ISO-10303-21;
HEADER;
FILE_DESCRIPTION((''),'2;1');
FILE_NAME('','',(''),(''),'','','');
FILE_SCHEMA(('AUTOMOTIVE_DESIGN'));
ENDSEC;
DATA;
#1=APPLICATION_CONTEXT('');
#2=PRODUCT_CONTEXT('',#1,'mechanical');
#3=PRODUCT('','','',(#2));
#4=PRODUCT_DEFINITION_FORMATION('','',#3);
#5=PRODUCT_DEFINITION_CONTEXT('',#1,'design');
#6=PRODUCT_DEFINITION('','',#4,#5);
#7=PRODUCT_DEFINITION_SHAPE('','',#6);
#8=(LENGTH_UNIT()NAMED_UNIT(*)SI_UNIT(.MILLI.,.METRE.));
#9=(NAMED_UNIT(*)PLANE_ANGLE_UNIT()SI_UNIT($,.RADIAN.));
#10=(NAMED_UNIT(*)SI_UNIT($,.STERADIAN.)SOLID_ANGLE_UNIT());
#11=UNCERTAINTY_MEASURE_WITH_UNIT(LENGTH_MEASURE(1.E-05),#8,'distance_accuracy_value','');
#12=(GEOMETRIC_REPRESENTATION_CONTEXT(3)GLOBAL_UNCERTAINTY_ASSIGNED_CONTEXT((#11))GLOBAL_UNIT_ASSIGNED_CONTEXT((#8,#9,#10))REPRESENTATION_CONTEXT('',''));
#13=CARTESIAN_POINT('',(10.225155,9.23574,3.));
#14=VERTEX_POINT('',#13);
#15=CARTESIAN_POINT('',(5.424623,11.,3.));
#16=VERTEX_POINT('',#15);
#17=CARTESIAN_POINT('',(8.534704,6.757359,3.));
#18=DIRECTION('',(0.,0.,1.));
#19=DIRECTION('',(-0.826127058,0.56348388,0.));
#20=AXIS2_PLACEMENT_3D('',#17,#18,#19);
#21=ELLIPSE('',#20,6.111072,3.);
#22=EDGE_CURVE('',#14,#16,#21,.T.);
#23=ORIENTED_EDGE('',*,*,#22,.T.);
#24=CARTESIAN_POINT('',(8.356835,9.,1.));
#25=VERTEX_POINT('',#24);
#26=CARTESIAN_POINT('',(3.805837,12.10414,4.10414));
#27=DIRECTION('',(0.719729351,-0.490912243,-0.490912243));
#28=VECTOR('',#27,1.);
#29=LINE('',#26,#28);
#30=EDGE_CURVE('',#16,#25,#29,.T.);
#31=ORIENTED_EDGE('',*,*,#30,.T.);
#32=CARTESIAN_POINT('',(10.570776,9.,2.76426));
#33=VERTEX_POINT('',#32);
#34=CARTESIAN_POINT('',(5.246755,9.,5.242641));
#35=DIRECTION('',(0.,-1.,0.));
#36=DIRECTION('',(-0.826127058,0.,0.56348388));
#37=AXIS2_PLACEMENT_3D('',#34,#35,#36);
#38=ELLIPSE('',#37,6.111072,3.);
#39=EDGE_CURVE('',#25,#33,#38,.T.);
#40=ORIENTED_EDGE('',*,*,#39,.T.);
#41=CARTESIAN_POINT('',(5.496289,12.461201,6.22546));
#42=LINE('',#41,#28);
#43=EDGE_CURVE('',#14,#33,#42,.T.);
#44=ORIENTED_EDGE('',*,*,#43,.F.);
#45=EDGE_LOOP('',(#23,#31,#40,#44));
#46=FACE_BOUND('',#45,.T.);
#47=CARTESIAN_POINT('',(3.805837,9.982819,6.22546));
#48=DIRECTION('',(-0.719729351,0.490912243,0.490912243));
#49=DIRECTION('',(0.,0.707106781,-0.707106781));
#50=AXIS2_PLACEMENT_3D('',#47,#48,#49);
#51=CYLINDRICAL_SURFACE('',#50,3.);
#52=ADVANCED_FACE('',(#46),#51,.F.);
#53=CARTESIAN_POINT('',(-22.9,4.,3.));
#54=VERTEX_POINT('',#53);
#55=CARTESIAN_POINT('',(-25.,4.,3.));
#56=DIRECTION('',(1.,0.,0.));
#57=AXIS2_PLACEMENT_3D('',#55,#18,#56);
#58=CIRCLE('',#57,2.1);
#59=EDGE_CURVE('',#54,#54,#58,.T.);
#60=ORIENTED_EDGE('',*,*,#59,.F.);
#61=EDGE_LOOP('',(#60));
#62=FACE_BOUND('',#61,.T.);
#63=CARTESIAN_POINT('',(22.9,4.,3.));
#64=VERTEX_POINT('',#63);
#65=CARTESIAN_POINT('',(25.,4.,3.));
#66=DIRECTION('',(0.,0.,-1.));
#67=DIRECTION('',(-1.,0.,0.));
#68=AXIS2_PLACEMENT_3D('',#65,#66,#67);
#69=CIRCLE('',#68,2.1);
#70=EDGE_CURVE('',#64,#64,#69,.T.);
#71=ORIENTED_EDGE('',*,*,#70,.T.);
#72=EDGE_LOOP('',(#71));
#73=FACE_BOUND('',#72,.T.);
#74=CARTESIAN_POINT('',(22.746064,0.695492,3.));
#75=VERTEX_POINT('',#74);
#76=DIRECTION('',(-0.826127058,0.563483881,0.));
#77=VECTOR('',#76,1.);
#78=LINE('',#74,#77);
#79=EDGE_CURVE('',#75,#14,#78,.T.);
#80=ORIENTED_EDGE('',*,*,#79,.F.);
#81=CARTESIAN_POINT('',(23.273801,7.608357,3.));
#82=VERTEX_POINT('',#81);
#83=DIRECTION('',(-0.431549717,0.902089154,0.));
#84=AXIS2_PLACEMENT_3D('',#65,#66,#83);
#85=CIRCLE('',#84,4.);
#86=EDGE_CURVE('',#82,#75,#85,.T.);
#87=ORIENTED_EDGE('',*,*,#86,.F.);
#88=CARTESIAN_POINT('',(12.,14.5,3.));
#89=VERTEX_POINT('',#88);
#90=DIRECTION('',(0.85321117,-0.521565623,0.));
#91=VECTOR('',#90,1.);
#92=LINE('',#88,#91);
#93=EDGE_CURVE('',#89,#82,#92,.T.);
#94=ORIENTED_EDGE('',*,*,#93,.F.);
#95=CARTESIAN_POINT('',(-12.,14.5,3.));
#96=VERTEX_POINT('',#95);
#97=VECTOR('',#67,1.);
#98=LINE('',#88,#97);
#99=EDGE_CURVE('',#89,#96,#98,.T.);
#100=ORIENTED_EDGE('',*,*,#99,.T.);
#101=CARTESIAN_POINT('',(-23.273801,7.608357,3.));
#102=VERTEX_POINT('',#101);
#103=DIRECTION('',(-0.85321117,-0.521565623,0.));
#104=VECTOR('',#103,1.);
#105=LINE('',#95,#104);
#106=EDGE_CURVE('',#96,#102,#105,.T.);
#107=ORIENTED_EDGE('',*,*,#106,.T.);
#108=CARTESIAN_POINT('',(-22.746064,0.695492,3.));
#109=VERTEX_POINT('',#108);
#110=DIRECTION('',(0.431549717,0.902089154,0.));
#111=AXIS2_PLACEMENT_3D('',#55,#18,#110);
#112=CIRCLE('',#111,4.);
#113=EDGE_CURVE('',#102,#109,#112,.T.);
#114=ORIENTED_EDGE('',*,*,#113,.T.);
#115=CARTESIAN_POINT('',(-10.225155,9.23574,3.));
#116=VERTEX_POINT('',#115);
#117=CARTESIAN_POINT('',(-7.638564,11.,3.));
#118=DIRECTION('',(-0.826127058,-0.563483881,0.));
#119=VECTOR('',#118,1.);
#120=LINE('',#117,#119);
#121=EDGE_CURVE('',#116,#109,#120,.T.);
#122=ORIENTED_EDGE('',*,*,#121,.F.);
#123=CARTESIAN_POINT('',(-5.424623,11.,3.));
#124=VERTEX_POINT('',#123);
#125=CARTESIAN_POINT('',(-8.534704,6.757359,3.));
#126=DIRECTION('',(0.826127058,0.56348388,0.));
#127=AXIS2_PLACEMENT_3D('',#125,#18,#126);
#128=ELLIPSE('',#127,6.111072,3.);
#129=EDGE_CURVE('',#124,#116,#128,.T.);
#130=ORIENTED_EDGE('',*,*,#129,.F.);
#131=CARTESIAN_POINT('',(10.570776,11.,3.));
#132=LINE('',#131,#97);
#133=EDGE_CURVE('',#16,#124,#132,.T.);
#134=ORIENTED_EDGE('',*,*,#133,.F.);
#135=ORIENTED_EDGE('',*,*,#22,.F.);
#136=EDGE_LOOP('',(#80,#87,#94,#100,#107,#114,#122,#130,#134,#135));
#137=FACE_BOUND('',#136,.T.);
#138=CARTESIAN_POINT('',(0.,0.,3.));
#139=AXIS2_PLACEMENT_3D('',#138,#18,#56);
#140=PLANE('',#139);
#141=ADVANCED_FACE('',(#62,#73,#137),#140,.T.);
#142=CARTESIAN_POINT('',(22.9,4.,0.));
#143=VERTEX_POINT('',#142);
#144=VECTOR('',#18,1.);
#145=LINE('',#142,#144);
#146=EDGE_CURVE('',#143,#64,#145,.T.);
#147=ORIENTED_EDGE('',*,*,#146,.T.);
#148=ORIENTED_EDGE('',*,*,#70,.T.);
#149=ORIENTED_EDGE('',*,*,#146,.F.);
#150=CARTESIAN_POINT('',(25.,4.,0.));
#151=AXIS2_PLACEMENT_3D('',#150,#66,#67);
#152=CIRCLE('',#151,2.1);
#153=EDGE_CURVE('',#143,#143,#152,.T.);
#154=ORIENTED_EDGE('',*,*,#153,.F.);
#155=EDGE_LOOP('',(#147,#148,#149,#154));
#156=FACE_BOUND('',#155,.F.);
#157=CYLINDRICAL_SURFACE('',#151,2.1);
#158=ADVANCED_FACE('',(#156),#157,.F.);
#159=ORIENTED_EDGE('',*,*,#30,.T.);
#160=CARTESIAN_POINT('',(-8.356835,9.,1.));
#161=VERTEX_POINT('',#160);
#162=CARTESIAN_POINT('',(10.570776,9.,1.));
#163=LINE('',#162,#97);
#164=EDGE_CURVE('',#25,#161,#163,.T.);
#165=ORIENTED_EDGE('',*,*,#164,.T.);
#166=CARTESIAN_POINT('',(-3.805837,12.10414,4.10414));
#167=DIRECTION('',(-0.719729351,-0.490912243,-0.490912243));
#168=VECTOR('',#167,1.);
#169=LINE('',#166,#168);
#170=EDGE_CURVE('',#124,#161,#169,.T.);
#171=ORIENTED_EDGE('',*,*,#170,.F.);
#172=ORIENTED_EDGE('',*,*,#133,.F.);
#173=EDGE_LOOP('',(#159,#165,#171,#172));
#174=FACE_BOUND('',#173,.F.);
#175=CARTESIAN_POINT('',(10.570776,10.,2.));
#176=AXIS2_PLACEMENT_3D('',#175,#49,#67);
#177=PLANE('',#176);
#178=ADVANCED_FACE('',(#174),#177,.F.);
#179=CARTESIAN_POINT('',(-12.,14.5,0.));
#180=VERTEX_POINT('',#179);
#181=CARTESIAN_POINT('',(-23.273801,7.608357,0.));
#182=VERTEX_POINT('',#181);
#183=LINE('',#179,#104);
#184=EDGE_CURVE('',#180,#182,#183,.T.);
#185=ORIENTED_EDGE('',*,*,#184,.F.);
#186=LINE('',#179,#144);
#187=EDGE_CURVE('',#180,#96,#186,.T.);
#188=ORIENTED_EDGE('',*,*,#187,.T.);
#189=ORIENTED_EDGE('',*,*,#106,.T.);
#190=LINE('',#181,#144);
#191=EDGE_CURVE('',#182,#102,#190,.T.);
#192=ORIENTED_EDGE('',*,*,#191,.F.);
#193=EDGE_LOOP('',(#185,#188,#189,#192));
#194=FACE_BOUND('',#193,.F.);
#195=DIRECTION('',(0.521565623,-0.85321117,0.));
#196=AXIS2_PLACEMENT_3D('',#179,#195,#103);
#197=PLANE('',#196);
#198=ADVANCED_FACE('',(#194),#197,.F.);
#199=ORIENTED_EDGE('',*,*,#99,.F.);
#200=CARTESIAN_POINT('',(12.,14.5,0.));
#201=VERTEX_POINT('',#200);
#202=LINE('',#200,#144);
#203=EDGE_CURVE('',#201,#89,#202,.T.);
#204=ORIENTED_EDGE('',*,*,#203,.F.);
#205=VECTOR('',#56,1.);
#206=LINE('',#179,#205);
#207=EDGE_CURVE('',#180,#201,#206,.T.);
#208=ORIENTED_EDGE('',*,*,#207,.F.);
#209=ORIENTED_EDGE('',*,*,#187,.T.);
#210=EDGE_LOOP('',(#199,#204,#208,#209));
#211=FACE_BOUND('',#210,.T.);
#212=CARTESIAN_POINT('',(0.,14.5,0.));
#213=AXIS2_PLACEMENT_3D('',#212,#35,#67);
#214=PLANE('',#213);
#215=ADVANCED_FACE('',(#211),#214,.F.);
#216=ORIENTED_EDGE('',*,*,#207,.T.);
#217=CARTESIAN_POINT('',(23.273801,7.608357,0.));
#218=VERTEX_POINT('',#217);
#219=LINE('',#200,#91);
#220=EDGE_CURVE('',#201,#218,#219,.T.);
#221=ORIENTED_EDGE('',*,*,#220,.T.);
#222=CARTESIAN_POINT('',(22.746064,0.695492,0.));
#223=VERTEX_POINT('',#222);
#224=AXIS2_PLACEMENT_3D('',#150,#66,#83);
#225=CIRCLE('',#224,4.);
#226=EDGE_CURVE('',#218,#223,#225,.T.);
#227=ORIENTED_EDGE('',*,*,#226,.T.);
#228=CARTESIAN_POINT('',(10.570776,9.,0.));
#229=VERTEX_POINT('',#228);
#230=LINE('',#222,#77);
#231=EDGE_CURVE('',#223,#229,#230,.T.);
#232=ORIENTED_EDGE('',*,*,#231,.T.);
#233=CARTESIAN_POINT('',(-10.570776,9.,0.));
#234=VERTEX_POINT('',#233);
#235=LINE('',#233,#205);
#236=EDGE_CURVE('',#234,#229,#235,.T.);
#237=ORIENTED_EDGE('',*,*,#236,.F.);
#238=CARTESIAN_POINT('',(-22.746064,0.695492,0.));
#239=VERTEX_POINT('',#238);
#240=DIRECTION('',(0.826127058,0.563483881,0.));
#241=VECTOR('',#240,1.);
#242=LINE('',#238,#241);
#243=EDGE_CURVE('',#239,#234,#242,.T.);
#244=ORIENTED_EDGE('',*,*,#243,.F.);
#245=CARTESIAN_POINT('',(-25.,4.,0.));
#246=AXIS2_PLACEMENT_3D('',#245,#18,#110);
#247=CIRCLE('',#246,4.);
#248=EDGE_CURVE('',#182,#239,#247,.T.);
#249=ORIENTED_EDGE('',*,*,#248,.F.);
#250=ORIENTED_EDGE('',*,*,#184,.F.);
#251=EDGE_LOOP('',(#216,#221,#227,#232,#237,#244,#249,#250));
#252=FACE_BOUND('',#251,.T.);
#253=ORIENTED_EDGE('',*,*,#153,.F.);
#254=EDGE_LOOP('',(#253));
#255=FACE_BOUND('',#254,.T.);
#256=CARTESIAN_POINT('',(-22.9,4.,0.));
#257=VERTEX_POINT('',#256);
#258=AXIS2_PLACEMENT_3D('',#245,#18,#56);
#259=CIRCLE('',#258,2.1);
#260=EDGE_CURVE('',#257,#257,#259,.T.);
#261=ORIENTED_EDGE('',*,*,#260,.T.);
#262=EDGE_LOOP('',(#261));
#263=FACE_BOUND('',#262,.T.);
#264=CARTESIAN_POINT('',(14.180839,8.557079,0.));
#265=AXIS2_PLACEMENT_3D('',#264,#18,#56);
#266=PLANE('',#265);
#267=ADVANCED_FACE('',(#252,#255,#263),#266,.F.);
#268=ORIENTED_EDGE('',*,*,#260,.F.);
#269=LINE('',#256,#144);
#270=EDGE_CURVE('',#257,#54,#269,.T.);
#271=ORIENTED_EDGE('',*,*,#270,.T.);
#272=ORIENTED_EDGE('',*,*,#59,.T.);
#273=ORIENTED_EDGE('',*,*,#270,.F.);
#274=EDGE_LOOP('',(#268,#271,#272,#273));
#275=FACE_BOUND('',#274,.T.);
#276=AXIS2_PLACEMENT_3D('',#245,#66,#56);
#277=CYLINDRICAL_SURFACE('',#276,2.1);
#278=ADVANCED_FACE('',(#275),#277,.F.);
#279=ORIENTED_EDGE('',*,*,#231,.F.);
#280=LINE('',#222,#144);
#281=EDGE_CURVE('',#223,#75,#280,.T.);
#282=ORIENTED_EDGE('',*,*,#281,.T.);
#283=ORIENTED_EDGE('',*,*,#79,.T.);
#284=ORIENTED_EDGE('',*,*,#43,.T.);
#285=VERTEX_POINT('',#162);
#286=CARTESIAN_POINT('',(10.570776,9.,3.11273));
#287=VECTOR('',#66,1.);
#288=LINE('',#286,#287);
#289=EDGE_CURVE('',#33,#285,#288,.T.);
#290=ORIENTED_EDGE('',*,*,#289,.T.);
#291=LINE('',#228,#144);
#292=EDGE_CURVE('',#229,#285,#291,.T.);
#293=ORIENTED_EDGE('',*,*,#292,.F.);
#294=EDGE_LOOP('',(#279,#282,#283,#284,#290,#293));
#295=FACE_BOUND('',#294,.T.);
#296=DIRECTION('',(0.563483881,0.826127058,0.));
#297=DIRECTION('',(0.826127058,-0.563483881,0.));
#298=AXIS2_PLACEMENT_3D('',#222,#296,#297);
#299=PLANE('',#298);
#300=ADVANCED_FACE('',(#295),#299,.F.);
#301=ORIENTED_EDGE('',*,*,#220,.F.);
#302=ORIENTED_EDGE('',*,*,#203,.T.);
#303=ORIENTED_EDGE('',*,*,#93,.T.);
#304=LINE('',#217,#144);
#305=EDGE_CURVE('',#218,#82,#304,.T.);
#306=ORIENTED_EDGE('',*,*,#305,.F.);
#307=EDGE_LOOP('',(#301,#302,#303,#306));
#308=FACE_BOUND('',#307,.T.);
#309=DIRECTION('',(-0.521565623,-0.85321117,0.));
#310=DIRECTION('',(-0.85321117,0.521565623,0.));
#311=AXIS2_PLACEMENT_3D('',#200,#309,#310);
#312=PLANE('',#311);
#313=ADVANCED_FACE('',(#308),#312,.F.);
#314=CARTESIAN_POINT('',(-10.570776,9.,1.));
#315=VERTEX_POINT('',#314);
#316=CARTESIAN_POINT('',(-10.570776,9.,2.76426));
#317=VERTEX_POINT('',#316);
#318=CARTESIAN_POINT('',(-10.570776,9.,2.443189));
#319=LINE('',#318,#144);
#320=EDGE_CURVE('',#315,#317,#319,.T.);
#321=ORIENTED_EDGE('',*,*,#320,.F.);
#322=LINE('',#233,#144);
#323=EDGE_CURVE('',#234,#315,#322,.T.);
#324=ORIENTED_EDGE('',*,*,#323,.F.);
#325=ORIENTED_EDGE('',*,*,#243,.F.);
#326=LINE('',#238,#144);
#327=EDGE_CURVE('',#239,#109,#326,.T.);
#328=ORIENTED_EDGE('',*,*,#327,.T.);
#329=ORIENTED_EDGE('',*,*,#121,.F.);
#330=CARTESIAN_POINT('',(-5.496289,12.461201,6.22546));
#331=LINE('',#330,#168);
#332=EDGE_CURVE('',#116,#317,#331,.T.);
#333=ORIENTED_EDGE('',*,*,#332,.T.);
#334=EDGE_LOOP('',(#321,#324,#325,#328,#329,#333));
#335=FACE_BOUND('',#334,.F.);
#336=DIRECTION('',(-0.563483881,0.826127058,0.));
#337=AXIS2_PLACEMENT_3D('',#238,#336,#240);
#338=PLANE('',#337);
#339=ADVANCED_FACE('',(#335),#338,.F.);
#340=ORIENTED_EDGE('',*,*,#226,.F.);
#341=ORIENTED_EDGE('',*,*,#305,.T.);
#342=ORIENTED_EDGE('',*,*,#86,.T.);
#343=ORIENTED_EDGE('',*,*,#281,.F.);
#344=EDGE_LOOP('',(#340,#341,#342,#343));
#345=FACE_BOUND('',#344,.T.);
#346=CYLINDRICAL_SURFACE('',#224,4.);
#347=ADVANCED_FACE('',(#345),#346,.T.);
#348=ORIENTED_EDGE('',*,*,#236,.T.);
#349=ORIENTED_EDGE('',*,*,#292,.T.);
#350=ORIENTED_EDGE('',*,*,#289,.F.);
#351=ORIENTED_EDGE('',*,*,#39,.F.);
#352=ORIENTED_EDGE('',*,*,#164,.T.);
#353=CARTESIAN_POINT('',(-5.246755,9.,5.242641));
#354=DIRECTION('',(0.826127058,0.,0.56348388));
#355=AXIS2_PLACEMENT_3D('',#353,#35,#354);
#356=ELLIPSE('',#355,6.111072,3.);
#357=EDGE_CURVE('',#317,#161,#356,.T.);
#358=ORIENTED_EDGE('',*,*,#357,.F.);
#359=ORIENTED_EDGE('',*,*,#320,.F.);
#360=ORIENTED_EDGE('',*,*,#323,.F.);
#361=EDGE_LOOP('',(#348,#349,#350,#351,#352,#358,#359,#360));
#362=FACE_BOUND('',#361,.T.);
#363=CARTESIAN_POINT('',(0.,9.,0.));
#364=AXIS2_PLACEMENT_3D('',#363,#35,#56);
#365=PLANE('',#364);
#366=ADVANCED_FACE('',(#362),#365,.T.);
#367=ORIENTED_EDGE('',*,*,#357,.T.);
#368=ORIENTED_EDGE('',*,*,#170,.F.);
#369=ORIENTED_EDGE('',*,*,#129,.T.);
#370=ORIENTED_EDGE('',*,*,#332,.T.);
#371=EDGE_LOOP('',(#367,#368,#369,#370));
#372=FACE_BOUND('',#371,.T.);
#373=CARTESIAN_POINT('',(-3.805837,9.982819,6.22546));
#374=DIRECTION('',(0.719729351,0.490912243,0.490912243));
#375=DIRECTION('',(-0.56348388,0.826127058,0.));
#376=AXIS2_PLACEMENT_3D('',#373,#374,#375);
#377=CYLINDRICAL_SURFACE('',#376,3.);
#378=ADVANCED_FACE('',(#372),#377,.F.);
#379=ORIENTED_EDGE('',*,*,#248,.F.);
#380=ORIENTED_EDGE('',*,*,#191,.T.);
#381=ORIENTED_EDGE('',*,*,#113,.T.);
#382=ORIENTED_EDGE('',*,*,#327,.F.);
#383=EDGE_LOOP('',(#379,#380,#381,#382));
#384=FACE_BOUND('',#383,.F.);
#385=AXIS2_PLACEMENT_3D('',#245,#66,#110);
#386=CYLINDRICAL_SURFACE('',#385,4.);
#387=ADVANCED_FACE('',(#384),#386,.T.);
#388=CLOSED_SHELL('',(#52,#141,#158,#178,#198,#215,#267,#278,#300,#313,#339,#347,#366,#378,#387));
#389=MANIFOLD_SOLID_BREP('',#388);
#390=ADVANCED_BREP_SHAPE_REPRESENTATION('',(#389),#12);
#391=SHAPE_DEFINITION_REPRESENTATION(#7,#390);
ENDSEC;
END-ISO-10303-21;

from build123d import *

# Parameters (mm, degrees)
F0_R         = 2.1
F1_DEPTH     = 3
F3_SIZE2     = 2
F3_SIZE      = 2
F4_T4_DEPTH  = 11.7592419794
F4_T10_DEPTH = 11.7592419794


# Not quite as in the source:
# - a fillet or chamfer that OpenCascade refuses, or shapes differently, is made with other operations: its cross-section is extruded or revolved along the edge and cut away or added


with BuildPart() as f1:
    # F0 (on Top) → F1 (new body)
    with BuildSketch(Plane.XY):
        with BuildLine():
            Line((0, 9), (0, 14.5))
            Line((0, 14.5), (-12, 14.5))
            Line((-12, 14.5), (-23.2738011309, 7.6083566155))
            ThreePointArc((-23.2738011309, 7.6083566155), (-28.988394733, 3.6955210129), (-22.746064478, 0.6954917669))
            Line((-22.746064478, 0.6954917669), (-10.5707757175, 9))
            Line((-10.5707757175, 9), (0, 9))
        make_face()
        with Locations((-25, 4)):
            Circle(F0_R, mode=Mode.SUBTRACT)
    extrude(amount=F1_DEPTH)

    # F2: F1 across plane


with BuildPart() as f1_1:
    add(f1.part)
    add(f1.part.mirror(Plane.YZ))

    # F3
    f3_edges = [f1_1.edges().sort_by_distance(p)[0] for p in [
        (0, 9, 3),
    ]]
    chamfer(f3_edges, length=F3_SIZE, length2=F3_SIZE2)

    # F4: fillet of radius 3 on 2 edges, made by hand


with BuildPart() as f4_tool2:
    # F4_s3 → F4_t4 (new body)
    with BuildSketch(Plane(origin=(-3.7553101229, 2.5614180039, 2.5614180039), x_dir=(0.5634838805, 0.8261270583, 0), z_dir=(0.7197293509, -0.4909122434, -0.4909122434))):
        with BuildLine():
            ThreePointArc((12.1440853808, 1.7707824696), (13.0615715756, 2.8377506524), (13.3916052457, 4.2056979457))
            Line((13.3916052457, 4.2056979457), (13.3916052457, 2.6686591321))
            Line((13.3916052457, 2.6686591321), (12.1440853808, 1.7707824696))
        make_face()
    extrude(amount=F4_T4_DEPTH)

    split(bisect_by=Plane.XY.offset(3), keep=Keep.BOTTOM)

    split(bisect_by=Plane.XZ.offset(-9), keep=Keep.BOTTOM)


with BuildPart() as f1_2:
    add(f1_1.part)

    # F4_t1: union F4_tool2
    add(f4_tool2.part)


with BuildPart() as f4_tool8:
    # F4_s9 → F4_t10 (new body)
    with BuildSketch(Plane(origin=(3.7553101229, 2.5614180039, 2.5614180039), x_dir=(0.5634838805, -0.8261270583, 0), z_dir=(-0.7197293509, -0.4909122434, -0.4909122434))):
        with BuildLine():
            ThreePointArc((-13.3916052457, 4.2056979457), (-13.0615715756, 2.8377506524), (-12.1440853808, 1.7707824696))
            Line((-12.1440853808, 1.7707824696), (-13.3916052457, 2.6686591321))
            Line((-13.3916052457, 2.6686591321), (-13.3916052457, 4.2056979457))
        make_face()
    extrude(amount=F4_T10_DEPTH)

    split(bisect_by=Plane.XY.offset(3), keep=Keep.BOTTOM)

    split(bisect_by=Plane.XZ.offset(-9), keep=Keep.BOTTOM)


with BuildPart() as f1_3:
    add(f1_2.part)

    # F4_t7: union F4_tool8
    add(f4_tool8.part)


solid = f1_3.part
